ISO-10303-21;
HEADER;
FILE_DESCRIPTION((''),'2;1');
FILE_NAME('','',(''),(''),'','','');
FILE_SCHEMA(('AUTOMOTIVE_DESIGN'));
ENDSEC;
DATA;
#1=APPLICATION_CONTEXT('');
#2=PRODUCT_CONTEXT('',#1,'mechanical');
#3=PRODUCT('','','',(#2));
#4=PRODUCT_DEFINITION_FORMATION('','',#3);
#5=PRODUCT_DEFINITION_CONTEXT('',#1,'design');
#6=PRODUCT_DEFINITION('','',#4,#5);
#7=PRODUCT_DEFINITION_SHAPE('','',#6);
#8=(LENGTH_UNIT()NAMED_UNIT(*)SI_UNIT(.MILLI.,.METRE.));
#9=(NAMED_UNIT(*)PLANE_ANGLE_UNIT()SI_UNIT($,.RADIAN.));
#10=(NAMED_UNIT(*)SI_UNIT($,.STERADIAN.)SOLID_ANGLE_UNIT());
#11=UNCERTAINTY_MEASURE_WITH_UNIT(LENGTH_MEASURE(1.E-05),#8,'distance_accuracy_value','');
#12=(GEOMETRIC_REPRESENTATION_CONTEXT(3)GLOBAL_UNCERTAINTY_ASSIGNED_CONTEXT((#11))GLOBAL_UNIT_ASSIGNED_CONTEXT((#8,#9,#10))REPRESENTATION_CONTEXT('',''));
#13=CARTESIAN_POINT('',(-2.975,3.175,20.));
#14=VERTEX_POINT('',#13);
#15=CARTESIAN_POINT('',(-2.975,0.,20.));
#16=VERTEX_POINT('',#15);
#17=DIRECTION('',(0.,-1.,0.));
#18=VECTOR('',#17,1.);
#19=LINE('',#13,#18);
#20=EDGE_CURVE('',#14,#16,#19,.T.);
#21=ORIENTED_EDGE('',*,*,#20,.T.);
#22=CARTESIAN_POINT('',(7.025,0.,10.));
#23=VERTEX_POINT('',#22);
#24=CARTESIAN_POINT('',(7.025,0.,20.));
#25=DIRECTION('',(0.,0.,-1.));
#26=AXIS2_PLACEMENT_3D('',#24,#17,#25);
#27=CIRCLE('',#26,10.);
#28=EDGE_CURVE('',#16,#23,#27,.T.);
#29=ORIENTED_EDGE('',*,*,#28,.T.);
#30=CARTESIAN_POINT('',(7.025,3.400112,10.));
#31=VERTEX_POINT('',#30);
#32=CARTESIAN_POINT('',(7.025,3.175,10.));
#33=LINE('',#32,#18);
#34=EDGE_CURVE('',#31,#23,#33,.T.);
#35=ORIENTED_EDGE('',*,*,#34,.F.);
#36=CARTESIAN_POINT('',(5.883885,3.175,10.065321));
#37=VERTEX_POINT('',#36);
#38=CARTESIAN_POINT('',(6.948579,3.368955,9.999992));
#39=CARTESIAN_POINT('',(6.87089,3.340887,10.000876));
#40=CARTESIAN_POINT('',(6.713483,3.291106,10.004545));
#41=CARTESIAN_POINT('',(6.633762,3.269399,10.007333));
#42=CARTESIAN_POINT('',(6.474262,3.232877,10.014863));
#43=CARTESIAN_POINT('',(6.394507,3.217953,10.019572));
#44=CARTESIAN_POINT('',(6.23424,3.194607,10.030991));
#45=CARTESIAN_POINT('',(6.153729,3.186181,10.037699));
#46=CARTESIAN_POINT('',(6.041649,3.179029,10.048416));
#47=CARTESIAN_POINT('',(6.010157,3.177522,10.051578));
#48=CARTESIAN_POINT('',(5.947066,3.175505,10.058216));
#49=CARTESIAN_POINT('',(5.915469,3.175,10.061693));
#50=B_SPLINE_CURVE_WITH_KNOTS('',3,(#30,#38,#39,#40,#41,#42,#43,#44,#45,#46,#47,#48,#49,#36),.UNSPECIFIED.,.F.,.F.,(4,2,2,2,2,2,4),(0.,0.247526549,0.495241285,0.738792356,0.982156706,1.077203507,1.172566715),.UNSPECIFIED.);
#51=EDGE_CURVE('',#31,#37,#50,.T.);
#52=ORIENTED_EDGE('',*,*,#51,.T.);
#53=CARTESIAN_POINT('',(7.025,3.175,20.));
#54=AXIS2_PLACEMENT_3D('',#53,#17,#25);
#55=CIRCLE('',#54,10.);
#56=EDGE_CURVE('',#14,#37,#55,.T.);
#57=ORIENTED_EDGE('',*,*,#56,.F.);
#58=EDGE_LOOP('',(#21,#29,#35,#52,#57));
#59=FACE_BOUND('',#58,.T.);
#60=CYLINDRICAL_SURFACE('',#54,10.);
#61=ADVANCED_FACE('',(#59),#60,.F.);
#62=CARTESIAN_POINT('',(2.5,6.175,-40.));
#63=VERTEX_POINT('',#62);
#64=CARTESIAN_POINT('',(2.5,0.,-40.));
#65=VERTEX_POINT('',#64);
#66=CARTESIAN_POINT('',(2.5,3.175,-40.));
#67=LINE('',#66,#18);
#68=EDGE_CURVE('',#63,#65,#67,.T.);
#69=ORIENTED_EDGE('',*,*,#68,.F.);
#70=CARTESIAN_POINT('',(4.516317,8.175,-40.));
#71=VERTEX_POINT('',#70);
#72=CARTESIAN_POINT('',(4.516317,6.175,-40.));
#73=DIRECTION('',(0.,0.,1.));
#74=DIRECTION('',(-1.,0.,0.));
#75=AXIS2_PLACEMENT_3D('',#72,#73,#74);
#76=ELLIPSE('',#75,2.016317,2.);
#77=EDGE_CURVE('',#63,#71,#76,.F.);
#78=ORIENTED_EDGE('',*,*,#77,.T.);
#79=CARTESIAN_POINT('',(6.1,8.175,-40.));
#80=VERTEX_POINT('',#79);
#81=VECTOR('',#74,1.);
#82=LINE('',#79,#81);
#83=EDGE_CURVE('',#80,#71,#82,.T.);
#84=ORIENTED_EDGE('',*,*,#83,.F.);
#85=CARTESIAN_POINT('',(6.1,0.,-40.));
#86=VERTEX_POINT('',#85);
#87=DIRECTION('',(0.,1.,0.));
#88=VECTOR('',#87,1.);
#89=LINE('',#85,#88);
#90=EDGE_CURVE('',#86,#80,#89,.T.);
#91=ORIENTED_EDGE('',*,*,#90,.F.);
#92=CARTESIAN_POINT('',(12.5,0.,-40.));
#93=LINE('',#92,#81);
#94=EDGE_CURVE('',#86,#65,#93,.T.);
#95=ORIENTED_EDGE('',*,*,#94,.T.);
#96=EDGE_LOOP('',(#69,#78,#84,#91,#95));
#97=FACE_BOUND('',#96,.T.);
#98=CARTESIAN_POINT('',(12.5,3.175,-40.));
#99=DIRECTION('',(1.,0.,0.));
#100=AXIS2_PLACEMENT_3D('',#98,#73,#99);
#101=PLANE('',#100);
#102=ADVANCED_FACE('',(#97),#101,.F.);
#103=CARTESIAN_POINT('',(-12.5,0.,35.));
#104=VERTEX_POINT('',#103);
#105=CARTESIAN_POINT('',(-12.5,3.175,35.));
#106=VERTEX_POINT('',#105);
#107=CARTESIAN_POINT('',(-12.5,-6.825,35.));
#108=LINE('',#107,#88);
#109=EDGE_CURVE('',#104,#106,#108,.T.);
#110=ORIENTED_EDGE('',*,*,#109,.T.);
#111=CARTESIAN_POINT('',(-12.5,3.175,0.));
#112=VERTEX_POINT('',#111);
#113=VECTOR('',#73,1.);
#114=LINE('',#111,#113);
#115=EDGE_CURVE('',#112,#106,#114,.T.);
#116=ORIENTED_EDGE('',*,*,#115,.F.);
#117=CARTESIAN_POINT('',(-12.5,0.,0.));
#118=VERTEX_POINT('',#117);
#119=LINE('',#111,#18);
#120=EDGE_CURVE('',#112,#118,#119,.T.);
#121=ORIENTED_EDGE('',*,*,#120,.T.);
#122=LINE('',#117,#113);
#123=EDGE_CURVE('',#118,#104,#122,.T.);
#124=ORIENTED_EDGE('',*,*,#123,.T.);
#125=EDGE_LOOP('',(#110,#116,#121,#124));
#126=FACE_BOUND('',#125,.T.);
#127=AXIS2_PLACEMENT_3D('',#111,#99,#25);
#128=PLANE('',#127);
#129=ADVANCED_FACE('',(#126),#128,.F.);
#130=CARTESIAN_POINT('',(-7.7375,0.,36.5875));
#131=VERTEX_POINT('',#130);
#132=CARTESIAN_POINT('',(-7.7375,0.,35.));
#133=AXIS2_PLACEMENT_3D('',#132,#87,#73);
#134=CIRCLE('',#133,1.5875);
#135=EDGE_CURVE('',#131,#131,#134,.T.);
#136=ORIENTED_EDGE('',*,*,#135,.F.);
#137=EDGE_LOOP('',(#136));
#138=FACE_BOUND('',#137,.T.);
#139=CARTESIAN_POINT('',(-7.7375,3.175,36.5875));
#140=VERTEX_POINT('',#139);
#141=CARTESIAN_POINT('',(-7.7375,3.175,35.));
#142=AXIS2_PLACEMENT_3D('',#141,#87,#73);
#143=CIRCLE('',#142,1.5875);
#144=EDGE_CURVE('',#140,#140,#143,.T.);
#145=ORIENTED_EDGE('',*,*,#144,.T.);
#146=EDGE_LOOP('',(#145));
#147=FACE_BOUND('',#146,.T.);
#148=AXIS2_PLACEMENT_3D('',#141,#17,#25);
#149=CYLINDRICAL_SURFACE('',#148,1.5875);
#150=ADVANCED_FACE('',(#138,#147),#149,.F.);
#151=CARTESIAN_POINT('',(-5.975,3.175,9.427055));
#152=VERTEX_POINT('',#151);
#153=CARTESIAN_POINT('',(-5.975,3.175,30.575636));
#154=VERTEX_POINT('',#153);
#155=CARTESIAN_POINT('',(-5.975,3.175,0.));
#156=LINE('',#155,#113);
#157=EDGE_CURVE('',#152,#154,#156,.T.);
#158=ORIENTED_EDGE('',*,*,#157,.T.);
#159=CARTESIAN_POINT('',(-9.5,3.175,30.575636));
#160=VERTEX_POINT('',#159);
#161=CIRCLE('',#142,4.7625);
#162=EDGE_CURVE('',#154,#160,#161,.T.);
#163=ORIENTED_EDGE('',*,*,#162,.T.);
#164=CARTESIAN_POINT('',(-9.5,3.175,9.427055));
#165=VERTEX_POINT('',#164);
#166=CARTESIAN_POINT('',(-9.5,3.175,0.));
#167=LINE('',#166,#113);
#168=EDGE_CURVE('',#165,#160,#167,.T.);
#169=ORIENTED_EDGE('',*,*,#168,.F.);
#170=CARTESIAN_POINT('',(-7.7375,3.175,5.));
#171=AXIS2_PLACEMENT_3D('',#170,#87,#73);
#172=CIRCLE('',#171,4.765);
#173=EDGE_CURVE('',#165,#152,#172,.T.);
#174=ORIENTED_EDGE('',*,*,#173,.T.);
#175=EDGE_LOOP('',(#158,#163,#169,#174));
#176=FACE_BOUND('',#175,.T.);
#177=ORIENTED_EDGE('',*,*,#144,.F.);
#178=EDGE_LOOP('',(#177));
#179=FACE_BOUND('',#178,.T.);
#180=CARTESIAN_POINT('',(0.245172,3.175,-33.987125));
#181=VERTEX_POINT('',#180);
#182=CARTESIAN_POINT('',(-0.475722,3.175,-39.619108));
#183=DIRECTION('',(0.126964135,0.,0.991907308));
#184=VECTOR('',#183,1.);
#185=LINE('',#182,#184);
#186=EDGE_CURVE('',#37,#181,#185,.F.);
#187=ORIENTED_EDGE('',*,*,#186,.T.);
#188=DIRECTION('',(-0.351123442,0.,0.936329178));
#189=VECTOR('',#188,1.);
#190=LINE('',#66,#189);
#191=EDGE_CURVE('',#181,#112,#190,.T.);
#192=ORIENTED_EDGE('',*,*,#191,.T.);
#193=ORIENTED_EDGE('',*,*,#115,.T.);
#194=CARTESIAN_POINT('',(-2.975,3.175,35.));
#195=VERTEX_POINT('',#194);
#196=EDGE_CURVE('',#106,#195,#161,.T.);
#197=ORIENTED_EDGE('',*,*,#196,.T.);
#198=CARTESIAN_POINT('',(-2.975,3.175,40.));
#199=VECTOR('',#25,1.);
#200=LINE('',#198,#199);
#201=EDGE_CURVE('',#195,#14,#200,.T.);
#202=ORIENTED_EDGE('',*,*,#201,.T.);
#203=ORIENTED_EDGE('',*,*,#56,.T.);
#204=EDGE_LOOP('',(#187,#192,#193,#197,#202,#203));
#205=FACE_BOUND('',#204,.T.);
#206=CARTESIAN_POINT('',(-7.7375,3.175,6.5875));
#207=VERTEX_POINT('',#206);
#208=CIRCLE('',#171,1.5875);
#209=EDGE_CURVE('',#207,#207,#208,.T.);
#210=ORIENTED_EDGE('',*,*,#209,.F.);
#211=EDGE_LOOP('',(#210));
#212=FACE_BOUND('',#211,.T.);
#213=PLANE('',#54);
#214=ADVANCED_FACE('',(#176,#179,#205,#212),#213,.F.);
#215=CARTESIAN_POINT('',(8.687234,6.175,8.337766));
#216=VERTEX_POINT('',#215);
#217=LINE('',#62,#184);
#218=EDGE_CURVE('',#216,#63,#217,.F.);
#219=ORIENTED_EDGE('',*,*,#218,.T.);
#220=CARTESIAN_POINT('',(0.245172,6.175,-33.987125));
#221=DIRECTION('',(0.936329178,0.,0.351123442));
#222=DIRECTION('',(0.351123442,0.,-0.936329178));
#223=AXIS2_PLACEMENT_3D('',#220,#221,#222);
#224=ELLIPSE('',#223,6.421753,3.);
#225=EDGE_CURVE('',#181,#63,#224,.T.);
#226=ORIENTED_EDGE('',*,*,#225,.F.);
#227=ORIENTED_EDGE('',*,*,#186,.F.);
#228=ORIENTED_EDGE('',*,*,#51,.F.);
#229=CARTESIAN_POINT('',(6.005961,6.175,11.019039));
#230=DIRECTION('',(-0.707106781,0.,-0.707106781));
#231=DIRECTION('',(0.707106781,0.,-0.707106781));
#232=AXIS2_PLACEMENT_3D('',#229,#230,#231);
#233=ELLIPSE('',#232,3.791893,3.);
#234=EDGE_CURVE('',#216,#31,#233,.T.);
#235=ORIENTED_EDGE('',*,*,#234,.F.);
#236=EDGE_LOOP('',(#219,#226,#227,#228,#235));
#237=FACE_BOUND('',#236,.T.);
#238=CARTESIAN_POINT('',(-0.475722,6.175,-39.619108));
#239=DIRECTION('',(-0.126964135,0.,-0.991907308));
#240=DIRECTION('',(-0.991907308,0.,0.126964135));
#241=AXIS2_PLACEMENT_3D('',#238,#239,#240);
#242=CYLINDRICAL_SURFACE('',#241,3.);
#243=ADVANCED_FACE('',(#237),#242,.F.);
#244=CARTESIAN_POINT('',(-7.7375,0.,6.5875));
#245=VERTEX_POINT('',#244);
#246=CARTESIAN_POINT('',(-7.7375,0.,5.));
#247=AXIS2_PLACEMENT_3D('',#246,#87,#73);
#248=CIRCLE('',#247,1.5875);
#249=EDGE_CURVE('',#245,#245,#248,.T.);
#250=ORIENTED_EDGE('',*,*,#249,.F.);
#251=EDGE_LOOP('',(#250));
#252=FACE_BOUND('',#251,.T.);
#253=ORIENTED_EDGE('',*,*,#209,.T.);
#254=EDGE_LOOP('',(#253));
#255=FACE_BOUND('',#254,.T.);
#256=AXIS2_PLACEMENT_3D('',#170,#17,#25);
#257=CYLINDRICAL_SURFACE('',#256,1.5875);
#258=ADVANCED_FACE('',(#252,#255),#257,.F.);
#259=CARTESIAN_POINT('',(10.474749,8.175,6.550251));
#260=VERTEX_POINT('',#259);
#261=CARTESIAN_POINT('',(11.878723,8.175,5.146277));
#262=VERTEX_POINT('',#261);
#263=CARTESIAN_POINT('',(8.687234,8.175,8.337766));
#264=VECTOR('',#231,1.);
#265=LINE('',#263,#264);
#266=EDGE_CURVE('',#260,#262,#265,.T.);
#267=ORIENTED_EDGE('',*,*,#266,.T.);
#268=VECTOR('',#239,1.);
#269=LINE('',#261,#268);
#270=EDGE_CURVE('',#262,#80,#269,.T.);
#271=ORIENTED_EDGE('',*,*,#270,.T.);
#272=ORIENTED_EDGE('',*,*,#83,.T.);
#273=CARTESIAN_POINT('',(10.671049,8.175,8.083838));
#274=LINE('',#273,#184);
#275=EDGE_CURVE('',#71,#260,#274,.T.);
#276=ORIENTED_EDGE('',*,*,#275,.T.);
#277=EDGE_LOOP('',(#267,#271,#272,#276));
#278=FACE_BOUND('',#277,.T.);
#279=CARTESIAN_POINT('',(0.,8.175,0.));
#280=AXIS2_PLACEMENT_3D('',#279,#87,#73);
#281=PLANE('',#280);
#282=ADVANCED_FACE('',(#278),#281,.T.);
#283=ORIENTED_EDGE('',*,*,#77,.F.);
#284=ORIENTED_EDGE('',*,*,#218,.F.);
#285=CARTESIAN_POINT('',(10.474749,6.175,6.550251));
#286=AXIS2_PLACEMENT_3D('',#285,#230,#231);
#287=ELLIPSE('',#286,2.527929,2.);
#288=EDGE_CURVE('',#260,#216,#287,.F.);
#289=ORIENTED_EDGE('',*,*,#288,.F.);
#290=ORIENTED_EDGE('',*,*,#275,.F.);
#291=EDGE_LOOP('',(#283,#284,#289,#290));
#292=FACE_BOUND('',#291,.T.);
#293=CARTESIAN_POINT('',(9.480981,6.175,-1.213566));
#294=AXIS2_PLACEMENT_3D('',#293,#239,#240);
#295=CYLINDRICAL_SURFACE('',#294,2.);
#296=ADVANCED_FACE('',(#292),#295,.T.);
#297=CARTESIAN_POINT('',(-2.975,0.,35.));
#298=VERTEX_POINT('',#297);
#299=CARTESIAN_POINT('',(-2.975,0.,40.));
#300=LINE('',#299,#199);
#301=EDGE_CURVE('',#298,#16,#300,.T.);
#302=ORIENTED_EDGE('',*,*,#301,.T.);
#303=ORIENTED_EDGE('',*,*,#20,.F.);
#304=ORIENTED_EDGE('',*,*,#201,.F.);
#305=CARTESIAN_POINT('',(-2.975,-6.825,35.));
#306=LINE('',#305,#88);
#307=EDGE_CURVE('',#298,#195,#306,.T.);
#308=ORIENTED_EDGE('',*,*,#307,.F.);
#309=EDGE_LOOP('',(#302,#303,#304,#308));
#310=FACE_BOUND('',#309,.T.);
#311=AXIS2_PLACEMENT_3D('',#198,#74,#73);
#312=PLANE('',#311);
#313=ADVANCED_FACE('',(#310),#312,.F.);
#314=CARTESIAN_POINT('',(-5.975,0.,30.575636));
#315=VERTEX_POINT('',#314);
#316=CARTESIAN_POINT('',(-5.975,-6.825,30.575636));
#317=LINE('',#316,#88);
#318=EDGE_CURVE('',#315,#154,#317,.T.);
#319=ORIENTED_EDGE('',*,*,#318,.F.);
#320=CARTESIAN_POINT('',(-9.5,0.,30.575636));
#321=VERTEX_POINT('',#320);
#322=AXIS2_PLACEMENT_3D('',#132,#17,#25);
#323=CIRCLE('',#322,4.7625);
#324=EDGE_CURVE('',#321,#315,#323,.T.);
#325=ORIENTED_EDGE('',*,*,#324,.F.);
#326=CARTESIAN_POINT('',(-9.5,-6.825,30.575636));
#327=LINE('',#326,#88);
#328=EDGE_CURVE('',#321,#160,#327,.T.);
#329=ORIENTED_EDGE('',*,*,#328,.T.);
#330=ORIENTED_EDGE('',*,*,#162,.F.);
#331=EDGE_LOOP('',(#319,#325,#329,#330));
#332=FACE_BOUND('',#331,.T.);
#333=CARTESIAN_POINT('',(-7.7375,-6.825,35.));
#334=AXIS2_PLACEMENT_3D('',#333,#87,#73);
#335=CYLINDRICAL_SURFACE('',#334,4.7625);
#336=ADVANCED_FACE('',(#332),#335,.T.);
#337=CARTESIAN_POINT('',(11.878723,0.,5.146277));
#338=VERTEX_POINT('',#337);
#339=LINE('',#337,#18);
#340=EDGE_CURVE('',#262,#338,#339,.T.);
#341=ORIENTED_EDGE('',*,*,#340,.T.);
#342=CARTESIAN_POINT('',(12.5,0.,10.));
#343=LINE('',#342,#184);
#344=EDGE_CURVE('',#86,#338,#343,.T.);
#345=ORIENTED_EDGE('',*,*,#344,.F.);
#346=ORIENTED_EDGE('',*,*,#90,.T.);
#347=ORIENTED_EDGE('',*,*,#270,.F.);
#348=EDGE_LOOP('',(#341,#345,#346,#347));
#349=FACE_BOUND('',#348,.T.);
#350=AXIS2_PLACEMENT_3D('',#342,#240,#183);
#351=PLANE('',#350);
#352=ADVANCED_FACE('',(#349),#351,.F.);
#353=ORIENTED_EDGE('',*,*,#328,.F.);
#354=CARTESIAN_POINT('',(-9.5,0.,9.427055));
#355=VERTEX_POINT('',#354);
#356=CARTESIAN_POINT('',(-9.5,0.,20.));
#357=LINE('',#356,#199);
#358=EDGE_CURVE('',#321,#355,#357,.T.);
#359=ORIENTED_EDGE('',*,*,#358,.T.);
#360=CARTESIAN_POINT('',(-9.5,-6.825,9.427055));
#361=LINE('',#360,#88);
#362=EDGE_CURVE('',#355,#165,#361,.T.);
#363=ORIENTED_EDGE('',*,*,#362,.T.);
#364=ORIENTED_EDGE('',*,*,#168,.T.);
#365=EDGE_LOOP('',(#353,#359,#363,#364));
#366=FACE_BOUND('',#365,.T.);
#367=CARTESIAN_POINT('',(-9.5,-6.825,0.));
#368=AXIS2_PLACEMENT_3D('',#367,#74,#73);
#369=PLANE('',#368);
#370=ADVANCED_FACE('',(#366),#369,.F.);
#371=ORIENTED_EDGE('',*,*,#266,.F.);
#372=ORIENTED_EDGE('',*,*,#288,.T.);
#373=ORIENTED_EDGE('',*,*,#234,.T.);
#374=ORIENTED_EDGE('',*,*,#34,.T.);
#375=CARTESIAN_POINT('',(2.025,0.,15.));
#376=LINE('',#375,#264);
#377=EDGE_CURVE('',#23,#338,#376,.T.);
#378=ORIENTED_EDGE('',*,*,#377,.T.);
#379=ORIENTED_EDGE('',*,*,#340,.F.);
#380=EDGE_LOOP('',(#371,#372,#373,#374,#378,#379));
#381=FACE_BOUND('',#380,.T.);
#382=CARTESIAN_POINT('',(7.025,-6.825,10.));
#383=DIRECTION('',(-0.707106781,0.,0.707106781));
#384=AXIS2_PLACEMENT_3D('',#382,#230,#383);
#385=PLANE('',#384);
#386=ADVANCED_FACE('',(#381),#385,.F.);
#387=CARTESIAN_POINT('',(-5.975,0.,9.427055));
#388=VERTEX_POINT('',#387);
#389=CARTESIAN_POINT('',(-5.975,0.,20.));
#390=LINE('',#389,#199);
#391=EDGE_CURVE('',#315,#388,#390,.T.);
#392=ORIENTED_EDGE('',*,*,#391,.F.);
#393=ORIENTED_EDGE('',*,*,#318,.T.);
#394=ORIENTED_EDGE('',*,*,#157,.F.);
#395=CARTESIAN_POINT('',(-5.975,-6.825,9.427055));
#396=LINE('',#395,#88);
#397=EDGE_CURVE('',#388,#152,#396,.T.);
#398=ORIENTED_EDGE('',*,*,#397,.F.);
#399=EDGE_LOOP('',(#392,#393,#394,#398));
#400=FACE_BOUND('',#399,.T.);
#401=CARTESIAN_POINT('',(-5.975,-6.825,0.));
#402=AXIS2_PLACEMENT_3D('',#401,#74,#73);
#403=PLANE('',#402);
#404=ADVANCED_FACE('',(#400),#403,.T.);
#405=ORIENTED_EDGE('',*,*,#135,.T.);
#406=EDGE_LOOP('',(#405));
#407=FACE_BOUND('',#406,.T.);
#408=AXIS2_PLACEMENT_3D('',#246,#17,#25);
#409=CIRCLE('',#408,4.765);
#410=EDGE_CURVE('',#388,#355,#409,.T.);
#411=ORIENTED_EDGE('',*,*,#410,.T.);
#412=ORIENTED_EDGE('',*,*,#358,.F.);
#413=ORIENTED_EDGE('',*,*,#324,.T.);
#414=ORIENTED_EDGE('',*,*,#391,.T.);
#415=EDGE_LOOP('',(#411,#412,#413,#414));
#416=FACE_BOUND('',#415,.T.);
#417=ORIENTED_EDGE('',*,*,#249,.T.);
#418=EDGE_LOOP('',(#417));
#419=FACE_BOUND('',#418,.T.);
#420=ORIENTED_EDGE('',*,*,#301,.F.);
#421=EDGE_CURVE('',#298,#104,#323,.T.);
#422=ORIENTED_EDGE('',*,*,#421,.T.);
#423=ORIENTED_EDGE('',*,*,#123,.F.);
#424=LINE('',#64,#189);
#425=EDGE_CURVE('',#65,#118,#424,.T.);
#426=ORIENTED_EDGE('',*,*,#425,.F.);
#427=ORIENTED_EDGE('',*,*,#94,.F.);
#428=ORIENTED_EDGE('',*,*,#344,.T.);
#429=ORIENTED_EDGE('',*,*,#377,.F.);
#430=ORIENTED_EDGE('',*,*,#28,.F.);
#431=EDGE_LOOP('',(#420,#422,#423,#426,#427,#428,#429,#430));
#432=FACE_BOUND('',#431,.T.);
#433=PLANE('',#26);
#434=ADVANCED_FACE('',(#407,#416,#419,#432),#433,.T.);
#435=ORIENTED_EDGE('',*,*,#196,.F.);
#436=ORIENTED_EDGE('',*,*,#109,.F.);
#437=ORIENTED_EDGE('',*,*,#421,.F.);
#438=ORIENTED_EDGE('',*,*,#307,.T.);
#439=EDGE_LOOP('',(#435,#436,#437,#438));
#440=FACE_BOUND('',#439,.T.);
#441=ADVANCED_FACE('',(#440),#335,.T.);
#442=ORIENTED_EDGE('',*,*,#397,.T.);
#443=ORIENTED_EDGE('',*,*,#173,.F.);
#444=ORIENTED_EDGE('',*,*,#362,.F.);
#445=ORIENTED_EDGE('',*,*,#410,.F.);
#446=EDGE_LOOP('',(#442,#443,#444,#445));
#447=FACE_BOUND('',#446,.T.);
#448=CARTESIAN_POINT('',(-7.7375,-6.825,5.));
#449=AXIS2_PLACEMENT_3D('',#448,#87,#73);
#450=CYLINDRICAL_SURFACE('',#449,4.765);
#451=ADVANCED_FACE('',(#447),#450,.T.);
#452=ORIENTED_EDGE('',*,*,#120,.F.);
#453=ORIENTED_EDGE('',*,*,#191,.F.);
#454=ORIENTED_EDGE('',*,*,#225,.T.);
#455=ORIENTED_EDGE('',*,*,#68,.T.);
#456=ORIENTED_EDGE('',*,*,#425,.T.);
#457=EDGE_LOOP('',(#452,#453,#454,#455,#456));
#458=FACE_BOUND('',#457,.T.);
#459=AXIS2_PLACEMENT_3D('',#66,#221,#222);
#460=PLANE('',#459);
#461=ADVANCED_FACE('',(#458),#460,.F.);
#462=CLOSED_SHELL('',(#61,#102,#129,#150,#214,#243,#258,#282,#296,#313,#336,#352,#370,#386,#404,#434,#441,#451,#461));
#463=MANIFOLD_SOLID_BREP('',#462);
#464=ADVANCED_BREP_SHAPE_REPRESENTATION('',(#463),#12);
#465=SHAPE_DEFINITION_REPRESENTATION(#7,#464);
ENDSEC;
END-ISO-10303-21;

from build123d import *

# Parameters (mm, degrees)
CROQUIS1_R              = 1.5875
SALIENTE_EXTRUIR1_DEPTH = 3.175
CORTAR_EXTRUIR1_DEPTH   = 3.175
CORTAR_EXTRUIR3_DEPTH   = 10
CORTAR_EXTRUIR8_DEPTH   = 10
BOSS_EXTRU_1_DEPTH      = 5
CONG_1_R                = 2
CONG_2_R                = 3


with BuildPart() as part:
    # Croquis1 → Saliente-Extruir1 (new body)
    with BuildSketch(Plane(origin=(0, 0, 0), x_dir=(1, 0, 0), z_dir=(0, 1, 0))):
        with BuildLine():
            Line((-12.5, 0), (-12.5, -40))
            Line((-12.5, -40), (-2.975, -40))
            Line((-2.975, -40), (-2.975, -20))
            ThreePointArc((-2.975, -20), (-0.046067812, -12.928932188), (7.025, -10))
            Line((7.025, -10), (12.5, -10))
            Line((12.5, -10), (12.5, 40))
            Line((12.5, 40), (2.5, 40))
            Line((2.5, 40), (-12.5, 0))
        make_face()
        with Locations(Location((-7.7375, -5, 0), (0, 0, 270))):
            Circle(CROQUIS1_R, mode=Mode.SUBTRACT)
        with Locations(Location((-7.7375, -35, 0), (0, 0, 270))):
            Circle(CROQUIS1_R, mode=Mode.SUBTRACT)
    extrude(amount=SALIENTE_EXTRUIR1_DEPTH)

    # Croquis2 → Cortar-Extruir1 (cut)
    with BuildSketch(Plane(origin=(0, 3.175, 0), x_dir=(1, 0, 0), z_dir=(0, 1, 0))):
        Polygon((12.5, -10), (6.1, 40), (12.5, 40), align=None)
    extrude(amount=-CORTAR_EXTRUIR1_DEPTH, mode=Mode.SUBTRACT)

    # Croquis3 → Cortar-Extruir3 (cut)
    with BuildSketch(Plane(origin=(0, 3.175, 0), x_dir=(1, 0, 0), z_dir=(0, 1, 0))):
        with BuildLine():
            ThreePointArc((-5.975, -30.575635639), (-7.7375, -30.2375), (-9.5, -30.575635639))
            Line((-9.5, -30.575635639), (-9.5, -9.427055314))
            ThreePointArc((-9.5, -9.427055314), (-7.7375, -9.765), (-5.975, -9.427055314))
            Line((-5.975, -9.427055314), (-5.975, -14.803847577))
            Line((-5.975, -14.803847577), (-5.975, -30.575635639))
        make_face()
        with BuildLine():
            ThreePointArc((-12.5, -35), (-7.7375, -39.7625), (-2.975, -35))
            Line((-2.975, -35), (-2.975, -40))
            Line((-2.975, -40), (-12.5, -40))
            Line((-12.5, -40), (-12.5, -35))
        make_face()
    extrude(amount=-CORTAR_EXTRUIR3_DEPTH, mode=Mode.SUBTRACT)

    # Croquis5 → Cortar-Extruir8 (cut)
    with BuildSketch(Plane(origin=(0, 3.175, 0), x_dir=(1, 0, 0), z_dir=(0, 1, 0))):
        Polygon((7.025, -10), (11.878723404, -5.146276596), (12.5, -10), align=None)
    extrude(amount=-CORTAR_EXTRUIR8_DEPTH, mode=Mode.SUBTRACT)

    # Esquisse1 → Boss.-Extru.1 (add)
    with BuildSketch(Plane(origin=(0, 3.175, 0), x_dir=(1, 0, 0), z_dir=(0, 1, 0))):
        Polygon((11.878723404, -5.146276596), (6.1, 40), (2.5, 40), (8.687234043, -8.337765957), align=None)
    extrude(amount=BOSS_EXTRU_1_DEPTH)

    # Congé1
    cong_1_edges = [part.edges().sort_by_distance(p)[0] for p in [
        (5.593617021, 8.175, -15.831117021),
    ]]
    fillet(cong_1_edges, radius=CONG_1_R)

    # Congé2
    cong_2_edges = [part.edges().sort_by_distance(p)[0] for p in [
        (5.593617021, 3.175, -15.831117021),
    ]]
    fillet(cong_2_edges, radius=CONG_2_R - 0.0001)  # a hair under: the kernel refuses the full size


solid = part.part
